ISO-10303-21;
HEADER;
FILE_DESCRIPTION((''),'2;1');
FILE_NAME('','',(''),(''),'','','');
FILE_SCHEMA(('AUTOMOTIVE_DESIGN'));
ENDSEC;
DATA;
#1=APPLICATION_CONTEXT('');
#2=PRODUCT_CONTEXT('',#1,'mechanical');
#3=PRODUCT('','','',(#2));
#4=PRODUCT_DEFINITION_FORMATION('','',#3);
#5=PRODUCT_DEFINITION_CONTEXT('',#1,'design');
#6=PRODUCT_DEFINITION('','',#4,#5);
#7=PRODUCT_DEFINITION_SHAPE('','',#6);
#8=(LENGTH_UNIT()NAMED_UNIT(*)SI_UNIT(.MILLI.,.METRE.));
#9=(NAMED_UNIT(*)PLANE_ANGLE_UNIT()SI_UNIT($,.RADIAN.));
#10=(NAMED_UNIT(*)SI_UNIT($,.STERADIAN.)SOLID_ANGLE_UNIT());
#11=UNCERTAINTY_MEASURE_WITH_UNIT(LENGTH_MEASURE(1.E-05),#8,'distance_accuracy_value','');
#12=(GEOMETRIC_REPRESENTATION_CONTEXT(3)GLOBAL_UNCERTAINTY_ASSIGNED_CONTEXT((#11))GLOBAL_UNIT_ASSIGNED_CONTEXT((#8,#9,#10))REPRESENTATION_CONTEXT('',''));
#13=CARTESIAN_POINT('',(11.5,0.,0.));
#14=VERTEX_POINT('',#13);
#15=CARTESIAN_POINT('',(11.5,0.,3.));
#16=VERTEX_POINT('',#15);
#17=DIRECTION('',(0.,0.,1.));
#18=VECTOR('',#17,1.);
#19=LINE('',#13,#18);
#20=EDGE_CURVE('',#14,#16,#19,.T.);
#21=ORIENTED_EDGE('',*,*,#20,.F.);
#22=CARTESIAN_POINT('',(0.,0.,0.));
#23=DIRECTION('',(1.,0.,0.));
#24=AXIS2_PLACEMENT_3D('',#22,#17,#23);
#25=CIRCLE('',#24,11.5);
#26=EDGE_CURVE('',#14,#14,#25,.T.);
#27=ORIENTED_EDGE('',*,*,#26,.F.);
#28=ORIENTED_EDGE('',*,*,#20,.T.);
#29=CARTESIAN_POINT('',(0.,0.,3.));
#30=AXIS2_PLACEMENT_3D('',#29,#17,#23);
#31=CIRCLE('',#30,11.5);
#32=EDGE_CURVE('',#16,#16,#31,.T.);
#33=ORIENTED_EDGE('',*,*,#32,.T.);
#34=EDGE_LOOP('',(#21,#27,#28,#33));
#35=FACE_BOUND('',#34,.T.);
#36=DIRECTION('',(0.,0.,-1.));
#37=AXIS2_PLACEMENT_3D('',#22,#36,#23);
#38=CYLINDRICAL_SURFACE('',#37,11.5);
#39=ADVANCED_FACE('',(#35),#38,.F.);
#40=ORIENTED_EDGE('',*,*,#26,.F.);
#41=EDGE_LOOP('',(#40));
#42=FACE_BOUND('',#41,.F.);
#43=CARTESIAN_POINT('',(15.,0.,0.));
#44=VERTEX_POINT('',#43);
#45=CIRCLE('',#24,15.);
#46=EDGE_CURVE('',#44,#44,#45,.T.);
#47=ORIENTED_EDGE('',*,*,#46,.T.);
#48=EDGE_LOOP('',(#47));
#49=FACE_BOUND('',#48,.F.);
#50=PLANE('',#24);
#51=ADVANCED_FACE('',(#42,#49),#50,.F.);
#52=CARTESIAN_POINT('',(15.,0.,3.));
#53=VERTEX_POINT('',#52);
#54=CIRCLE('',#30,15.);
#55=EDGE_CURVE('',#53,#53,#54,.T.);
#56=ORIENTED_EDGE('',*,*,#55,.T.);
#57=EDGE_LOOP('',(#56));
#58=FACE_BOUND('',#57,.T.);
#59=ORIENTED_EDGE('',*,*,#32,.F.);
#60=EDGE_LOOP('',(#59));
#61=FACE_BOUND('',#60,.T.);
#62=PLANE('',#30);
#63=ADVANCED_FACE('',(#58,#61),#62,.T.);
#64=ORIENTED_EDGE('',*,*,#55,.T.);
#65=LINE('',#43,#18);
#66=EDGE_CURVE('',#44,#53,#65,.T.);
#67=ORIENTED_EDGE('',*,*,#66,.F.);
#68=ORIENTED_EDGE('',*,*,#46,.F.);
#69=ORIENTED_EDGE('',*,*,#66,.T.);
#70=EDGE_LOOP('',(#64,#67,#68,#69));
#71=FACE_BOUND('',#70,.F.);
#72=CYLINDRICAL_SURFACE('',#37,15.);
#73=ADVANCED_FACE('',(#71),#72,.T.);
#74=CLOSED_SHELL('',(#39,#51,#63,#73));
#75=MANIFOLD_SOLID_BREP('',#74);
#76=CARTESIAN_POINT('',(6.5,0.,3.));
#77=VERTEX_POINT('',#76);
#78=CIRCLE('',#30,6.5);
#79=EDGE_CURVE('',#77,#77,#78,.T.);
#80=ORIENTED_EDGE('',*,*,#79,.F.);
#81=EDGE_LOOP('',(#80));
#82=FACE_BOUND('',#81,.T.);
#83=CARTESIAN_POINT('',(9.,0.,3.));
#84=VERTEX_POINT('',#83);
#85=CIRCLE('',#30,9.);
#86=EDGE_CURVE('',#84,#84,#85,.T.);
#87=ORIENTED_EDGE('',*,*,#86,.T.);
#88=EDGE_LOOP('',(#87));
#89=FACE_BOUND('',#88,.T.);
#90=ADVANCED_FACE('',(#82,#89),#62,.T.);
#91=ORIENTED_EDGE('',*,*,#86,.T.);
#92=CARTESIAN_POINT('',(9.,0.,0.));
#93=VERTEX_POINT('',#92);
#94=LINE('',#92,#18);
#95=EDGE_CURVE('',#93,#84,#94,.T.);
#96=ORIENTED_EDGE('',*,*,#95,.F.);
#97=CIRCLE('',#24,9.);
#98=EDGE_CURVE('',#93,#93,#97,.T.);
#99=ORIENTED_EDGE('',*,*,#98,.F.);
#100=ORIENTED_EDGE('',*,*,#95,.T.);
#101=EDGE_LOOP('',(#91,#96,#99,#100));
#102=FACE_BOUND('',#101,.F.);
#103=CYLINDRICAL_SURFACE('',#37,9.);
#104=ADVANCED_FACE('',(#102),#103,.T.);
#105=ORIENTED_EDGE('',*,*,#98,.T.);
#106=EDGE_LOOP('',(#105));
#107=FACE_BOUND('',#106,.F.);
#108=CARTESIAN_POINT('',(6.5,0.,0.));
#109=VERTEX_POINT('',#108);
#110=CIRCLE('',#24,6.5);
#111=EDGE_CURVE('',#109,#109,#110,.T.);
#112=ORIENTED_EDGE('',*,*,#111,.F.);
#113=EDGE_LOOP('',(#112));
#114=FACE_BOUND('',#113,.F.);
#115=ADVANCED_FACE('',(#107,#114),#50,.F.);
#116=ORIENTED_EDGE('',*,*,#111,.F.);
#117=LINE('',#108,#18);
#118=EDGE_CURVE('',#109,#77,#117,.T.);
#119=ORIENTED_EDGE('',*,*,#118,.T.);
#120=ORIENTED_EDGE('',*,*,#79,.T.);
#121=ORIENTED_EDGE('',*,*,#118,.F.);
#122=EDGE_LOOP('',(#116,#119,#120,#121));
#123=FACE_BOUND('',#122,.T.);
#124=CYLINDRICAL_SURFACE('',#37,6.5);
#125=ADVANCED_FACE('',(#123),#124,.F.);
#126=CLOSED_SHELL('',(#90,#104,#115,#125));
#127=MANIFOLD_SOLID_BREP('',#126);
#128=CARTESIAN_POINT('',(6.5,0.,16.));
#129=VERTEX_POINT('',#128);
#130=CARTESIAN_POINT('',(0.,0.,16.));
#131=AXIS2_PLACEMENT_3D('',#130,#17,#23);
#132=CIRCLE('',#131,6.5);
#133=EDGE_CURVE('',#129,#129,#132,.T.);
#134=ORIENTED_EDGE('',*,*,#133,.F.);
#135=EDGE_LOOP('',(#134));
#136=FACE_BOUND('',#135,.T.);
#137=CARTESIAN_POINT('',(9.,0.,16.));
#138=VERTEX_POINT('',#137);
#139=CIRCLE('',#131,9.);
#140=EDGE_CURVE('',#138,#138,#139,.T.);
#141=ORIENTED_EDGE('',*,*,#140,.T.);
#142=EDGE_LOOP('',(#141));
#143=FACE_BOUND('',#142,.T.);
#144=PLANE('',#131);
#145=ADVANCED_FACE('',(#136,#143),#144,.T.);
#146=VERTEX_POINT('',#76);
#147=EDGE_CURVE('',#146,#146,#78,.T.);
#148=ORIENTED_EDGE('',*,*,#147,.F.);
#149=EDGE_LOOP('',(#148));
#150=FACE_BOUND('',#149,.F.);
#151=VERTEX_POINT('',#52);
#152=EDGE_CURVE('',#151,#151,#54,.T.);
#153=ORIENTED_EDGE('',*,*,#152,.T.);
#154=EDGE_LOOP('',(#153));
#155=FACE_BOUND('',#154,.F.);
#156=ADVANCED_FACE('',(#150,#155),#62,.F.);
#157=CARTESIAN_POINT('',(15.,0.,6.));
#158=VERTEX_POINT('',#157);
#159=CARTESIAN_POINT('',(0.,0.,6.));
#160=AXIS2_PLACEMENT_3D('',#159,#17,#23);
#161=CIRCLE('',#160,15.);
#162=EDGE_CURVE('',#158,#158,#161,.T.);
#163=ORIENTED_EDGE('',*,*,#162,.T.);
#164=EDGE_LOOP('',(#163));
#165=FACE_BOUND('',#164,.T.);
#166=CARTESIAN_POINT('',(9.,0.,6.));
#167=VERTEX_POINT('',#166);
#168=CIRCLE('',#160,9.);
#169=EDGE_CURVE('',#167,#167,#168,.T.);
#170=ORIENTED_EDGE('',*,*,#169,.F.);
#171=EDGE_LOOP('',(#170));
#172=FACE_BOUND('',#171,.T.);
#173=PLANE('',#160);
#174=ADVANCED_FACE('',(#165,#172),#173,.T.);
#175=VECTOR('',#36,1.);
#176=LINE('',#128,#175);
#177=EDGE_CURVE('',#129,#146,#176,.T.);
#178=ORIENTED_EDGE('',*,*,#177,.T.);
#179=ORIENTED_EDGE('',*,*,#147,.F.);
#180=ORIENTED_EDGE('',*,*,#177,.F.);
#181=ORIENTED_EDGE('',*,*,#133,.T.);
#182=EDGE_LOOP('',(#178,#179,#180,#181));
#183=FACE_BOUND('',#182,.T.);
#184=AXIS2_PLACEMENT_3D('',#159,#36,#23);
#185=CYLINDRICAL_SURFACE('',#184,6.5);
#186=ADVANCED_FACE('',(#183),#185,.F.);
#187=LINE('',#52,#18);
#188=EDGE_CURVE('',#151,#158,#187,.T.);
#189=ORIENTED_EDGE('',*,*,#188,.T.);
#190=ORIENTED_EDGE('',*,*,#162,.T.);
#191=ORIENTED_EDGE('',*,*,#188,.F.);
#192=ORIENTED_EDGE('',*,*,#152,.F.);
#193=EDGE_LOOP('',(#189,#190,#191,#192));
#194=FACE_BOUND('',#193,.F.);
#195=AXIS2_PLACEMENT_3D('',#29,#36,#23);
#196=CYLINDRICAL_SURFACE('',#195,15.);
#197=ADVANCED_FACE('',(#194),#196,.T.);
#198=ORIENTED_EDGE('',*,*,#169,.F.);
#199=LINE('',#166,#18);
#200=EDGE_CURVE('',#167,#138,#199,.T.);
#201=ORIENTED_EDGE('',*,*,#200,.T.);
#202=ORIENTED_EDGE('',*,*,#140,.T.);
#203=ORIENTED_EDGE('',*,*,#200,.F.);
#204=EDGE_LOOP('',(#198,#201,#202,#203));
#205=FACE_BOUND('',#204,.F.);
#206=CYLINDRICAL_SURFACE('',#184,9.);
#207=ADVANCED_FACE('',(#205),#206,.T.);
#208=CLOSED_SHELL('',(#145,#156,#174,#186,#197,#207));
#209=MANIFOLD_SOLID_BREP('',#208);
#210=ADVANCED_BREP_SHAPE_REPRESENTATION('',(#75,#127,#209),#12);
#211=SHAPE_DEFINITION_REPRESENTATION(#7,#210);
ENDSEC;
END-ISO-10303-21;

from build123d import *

# Parameters (mm, degrees)
F0_R     = 15
F0_R_2   = 11.5
F1_DEPTH = 3
F0_R_3   = 9
F0_R_4   = 6.5
F2_R     = 15
F2_R_2   = 11.5
F2_R_3   = 6.5
F3_DEPTH = 3
F4_R     = 9
F4_R_2   = 6.5
F5_DEPTH = 10


# Not quite as in the source:
# - a feature names something its author has since deleted; it is built from what else it names


with BuildPart() as f1:
    # F0 (on Top) → F1 (new body)
    with BuildSketch(Plane.XY):
        Circle(F0_R)
        Circle(F0_R_2, mode=Mode.SUBTRACT)
    extrude(amount=F1_DEPTH)


with BuildPart() as f1b:
    # F0 (on Top) → F1, piece 2 (new body)
    with BuildSketch(Plane.XY):
        Circle(F0_R_3)
        Circle(F0_R_4, mode=Mode.SUBTRACT)
    extrude(amount=F1_DEPTH)


with BuildPart() as f3:
    # F2 (on face) → F3 (new body)
    with BuildSketch(Plane.XY.offset(3)):
        Circle(F2_R)
        Circle(F2_R_2, mode=Mode.SUBTRACT)
        Circle(F2_R_2)
        Circle(F2_R_3, mode=Mode.SUBTRACT)
    extrude(amount=F3_DEPTH)

    # F4 (on face) → F5 (join)
    with BuildSketch(Plane.XY.offset(6)):
        Circle(F4_R)
        Circle(F4_R_2, mode=Mode.SUBTRACT)
    extrude(amount=F5_DEPTH)


solid = Compound([f1.part, f1b.part, f3.part])
